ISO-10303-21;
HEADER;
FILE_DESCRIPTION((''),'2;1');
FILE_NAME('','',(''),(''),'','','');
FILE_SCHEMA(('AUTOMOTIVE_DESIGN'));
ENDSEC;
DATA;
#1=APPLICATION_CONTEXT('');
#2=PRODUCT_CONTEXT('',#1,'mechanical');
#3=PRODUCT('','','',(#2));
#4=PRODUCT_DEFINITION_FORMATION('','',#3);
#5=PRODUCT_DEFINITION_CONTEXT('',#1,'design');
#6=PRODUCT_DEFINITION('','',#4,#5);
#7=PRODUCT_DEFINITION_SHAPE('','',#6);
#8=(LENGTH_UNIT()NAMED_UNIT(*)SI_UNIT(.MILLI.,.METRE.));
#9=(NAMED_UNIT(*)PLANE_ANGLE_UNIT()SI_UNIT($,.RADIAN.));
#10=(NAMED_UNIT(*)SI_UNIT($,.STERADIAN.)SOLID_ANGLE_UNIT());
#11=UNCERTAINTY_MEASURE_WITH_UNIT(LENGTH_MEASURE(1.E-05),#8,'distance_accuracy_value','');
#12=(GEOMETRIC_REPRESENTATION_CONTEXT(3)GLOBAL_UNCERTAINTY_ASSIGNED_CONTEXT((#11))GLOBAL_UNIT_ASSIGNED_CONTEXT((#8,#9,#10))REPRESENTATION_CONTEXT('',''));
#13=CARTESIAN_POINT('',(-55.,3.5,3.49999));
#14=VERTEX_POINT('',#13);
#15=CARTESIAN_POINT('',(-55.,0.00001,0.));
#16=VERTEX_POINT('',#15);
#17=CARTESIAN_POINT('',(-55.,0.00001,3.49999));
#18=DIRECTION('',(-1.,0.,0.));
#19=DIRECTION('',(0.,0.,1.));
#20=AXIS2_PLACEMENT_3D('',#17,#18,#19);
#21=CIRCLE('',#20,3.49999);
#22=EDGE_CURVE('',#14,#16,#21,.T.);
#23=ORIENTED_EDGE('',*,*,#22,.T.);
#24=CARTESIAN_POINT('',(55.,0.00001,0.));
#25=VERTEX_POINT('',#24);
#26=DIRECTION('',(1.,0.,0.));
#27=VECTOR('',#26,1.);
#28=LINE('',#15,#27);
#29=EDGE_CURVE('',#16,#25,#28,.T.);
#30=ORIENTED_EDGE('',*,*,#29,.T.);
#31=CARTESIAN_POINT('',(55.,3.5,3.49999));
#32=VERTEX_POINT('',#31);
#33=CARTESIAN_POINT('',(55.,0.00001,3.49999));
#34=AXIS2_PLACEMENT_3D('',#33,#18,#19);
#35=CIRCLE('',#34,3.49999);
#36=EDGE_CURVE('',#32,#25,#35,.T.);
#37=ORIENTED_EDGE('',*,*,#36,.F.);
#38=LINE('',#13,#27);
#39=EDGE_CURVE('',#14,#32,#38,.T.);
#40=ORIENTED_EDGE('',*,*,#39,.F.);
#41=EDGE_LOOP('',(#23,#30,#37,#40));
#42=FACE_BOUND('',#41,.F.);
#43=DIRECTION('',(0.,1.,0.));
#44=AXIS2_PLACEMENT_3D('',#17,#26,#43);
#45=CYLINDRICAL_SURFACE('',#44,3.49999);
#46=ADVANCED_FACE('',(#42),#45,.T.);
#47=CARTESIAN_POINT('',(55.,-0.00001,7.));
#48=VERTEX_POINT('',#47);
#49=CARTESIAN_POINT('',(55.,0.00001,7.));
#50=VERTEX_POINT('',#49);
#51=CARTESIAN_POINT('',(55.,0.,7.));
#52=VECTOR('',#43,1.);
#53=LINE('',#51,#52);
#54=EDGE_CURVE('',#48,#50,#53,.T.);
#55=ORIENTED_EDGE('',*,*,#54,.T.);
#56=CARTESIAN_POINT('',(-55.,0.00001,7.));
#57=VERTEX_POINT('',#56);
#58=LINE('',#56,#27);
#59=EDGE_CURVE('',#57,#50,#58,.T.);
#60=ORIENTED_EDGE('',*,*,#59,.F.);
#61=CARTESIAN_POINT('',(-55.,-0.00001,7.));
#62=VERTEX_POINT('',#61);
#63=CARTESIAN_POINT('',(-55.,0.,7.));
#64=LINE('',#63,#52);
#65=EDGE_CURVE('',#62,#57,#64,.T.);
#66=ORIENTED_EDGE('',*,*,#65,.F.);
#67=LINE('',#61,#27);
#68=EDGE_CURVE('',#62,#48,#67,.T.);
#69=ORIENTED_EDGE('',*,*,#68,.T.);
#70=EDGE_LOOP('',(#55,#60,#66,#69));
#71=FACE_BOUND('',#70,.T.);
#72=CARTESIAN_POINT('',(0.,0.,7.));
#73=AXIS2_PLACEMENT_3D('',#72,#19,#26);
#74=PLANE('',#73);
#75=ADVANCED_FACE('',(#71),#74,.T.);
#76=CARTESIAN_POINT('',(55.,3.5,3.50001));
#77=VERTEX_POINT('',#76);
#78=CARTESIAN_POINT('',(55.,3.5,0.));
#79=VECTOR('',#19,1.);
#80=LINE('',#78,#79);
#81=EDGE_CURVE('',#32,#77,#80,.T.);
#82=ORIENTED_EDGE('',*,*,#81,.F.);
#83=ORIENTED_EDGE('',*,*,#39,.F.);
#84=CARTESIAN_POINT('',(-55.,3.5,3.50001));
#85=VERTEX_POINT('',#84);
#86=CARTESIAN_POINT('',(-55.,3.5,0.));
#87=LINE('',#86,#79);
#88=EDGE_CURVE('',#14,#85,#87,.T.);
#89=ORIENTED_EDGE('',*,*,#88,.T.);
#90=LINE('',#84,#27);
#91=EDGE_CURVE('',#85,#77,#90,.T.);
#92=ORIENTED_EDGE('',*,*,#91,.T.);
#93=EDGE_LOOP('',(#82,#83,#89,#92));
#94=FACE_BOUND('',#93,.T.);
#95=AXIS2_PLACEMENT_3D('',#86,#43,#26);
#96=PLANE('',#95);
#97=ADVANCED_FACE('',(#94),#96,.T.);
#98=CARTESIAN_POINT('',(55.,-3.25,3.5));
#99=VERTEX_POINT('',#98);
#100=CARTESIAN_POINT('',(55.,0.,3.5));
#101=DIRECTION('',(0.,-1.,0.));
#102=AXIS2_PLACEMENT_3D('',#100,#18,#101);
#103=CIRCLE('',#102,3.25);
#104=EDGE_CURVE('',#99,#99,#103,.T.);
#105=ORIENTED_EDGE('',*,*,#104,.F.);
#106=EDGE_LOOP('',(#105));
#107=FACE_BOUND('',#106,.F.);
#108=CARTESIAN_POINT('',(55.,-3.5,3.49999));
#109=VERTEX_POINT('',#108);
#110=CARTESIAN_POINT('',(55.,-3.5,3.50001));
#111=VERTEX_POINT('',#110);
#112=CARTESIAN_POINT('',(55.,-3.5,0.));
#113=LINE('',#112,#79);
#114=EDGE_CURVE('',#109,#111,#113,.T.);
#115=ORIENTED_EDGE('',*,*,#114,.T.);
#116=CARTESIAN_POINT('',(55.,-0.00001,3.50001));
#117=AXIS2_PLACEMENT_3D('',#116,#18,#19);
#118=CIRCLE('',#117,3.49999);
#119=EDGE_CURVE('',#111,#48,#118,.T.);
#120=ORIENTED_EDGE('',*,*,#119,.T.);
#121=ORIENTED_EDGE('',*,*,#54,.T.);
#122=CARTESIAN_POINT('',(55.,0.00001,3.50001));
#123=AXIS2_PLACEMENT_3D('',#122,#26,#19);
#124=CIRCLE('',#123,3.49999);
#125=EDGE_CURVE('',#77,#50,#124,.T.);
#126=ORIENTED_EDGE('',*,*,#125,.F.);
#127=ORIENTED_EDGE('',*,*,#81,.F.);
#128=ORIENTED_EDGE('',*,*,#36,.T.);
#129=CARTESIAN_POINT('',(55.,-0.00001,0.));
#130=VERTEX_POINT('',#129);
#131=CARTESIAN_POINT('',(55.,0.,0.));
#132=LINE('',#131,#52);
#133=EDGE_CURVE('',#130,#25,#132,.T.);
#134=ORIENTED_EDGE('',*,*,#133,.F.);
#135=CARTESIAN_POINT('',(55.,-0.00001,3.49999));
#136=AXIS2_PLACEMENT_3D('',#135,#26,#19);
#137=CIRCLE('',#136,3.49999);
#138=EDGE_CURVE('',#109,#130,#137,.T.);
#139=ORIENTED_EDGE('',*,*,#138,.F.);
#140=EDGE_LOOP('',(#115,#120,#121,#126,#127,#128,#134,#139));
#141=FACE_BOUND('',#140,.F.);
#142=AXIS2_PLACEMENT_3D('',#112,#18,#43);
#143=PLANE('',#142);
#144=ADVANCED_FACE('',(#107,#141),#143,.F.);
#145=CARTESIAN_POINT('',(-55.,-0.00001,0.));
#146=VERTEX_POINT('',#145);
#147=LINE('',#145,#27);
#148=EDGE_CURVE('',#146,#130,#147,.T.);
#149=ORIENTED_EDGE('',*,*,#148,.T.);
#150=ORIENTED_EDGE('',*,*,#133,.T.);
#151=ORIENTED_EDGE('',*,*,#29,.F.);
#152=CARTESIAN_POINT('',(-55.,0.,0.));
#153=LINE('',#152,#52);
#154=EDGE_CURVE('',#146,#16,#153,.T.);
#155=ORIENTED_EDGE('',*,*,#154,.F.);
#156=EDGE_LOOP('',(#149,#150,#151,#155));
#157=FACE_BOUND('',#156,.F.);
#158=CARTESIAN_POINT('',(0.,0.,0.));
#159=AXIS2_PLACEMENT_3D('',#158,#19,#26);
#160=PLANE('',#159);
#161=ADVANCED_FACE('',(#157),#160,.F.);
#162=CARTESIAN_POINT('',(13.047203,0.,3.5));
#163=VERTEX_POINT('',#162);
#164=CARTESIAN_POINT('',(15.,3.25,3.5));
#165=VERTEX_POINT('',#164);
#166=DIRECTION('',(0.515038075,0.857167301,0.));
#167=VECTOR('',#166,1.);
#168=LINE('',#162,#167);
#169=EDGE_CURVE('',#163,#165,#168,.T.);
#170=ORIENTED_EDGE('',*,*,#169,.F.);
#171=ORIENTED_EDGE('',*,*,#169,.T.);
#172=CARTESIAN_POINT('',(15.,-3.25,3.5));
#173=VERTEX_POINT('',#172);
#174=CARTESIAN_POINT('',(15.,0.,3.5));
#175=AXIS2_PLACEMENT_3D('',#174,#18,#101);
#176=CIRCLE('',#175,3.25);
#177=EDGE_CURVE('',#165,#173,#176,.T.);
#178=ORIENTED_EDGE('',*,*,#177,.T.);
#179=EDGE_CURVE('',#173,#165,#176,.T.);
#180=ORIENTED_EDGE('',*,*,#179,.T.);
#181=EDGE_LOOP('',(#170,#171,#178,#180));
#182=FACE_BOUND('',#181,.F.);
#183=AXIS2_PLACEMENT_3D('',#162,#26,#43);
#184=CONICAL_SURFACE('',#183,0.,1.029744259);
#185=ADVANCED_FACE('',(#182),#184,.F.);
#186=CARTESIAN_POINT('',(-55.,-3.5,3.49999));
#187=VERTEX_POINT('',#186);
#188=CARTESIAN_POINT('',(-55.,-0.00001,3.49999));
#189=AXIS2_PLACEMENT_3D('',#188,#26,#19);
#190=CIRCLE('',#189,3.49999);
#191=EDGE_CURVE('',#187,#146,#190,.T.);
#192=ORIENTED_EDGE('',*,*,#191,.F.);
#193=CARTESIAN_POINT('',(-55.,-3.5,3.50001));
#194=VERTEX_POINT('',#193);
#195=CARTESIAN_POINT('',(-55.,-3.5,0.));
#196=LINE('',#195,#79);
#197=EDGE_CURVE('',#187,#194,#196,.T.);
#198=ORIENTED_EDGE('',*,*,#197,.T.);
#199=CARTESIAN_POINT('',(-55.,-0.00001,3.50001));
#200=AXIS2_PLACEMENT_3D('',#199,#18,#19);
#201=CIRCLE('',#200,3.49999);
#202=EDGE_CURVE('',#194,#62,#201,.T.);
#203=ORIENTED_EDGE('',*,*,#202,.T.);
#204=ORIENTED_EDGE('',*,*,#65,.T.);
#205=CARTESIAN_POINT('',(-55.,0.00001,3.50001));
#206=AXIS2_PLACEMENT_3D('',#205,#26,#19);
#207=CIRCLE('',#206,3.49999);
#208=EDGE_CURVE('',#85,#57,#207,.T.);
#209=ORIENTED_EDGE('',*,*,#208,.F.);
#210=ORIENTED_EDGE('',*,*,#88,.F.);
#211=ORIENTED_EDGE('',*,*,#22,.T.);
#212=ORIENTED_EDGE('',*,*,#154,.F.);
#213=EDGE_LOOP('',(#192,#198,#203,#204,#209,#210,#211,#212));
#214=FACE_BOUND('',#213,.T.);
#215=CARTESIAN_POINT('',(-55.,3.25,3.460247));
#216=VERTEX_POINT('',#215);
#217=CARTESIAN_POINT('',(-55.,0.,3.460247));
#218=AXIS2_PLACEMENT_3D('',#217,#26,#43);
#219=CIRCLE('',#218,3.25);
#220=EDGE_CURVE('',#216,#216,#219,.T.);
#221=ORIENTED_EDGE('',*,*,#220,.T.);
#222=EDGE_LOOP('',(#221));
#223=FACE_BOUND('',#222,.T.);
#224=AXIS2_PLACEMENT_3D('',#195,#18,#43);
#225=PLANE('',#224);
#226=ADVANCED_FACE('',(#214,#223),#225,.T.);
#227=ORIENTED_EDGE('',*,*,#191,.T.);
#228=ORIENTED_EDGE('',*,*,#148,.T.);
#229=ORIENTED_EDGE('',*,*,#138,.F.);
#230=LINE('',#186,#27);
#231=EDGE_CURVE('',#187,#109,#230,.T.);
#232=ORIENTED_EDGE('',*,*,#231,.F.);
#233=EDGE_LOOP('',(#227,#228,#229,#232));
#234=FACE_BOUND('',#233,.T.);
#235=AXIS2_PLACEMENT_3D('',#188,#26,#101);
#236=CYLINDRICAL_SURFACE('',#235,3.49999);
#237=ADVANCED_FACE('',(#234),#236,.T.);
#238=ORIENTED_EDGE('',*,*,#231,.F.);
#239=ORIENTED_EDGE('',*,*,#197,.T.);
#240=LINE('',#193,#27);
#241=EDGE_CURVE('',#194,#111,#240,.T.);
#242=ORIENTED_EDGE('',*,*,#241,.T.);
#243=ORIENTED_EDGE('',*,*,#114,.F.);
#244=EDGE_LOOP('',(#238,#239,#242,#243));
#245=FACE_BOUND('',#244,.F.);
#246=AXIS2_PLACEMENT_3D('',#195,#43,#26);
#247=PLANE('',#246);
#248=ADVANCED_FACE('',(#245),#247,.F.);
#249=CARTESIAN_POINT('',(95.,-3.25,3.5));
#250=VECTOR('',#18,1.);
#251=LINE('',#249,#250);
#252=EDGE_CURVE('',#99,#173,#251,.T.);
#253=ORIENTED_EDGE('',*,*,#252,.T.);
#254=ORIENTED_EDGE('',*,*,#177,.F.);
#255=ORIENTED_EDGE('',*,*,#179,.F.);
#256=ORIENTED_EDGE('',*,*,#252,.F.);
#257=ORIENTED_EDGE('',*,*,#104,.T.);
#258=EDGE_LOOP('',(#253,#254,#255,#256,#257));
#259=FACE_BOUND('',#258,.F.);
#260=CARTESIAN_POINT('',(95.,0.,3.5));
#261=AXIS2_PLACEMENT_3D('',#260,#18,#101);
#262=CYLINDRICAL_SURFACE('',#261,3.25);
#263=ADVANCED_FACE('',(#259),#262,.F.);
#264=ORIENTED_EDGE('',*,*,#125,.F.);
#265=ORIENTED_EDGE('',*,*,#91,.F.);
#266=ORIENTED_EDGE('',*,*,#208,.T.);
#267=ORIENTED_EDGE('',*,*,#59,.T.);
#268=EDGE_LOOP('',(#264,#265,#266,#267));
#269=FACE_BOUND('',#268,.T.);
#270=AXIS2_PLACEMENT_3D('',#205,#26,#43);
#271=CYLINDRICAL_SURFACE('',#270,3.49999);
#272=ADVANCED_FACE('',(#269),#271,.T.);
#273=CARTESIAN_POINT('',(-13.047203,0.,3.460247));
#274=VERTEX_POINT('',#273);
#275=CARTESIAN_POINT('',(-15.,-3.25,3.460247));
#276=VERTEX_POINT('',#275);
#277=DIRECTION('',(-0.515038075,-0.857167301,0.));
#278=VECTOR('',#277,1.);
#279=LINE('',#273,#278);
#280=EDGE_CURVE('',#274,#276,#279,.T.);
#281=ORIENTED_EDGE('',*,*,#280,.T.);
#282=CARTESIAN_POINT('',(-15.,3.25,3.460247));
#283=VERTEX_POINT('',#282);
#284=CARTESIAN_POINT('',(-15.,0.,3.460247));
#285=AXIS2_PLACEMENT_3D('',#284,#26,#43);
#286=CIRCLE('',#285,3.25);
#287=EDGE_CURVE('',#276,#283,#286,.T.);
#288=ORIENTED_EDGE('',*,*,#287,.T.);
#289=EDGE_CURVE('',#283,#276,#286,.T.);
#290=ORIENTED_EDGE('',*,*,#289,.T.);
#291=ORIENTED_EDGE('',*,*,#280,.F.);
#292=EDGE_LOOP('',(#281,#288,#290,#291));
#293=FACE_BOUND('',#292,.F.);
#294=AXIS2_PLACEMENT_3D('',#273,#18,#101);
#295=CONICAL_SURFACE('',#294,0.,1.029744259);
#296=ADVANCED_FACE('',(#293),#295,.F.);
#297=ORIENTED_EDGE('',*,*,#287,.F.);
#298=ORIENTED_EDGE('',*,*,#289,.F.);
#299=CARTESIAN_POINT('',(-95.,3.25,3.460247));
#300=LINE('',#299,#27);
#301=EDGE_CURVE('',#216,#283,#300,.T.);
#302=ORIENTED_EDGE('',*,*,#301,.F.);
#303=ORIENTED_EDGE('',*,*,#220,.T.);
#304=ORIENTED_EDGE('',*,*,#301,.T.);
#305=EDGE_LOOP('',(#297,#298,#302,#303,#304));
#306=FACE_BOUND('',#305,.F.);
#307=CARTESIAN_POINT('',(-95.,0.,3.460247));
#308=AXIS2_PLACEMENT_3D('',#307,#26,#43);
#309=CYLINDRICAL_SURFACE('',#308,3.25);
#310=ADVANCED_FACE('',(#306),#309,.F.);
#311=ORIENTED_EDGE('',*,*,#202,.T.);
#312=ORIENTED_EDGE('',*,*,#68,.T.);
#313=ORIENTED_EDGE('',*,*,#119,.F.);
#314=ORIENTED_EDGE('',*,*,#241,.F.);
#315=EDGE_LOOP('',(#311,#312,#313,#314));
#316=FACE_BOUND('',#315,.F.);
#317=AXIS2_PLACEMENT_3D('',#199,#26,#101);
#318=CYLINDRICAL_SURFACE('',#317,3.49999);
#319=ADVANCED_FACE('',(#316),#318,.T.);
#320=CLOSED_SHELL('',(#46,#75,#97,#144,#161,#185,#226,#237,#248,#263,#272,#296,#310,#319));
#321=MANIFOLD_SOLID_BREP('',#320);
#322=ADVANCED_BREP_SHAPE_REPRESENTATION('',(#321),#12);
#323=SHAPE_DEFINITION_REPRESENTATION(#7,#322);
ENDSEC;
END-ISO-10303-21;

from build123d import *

# Parameters (mm, degrees)
F0_W     = 110
F0_H     = 7
F1_DEPTH = 7
F3_R     = 3.49999
F6_D     = 6.5
F6_DEPTH = 40
F6_TIP   = 1.9527970118
F7_D     = 6.5
F7_DEPTH = 40
F7_TIP   = 1.9527970118


# Not quite as in the source:
# - a fillet or chamfer is up to 0.001 mm smaller than in the source, because OpenCascade refuses the exact size


with BuildPart() as f1:
    # F0 (on Top) → F1 (new body)
    with BuildSketch(Plane.XY):
        Rectangle(F0_W, F0_H)
    extrude(amount=F1_DEPTH)

    # F3 (radius 3.5 in the source; OpenCascade refuses exactly that, so slightly less here)
    f3_edges = [f1.edges().sort_by_distance(p)[0] for p in [
        (0, -3.5, 7),
        (0, 3.5, 7),
        (0, 3.5, 0),
        (0, -3.5, 0),
    ]]
    fillet(f3_edges, radius=F3_R)

    # F6
    with Locations(Plane.YZ.offset(55)):
        with Locations((0, 3.5)):
            Hole(F6_D / 2, depth=F6_DEPTH)
            with Locations((0, 0, -(F6_DEPTH + F6_TIP / 2))):  # 118° drill point
                Cone(0, F6_D / 2, F6_TIP, mode=Mode.SUBTRACT)

    # F7
    with Locations(Plane(origin=(-55, 0, 0), x_dir=(0, -1, 0), z_dir=(-1, 0, 0))):
        with Locations((0, 3.4602470696)):
            Hole(F7_D / 2, depth=F7_DEPTH)
            with Locations((0, 0, -(F7_DEPTH + F7_TIP / 2))):  # 118° drill point
                Cone(0, F7_D / 2, F7_TIP, mode=Mode.SUBTRACT)


solid = f1.part
